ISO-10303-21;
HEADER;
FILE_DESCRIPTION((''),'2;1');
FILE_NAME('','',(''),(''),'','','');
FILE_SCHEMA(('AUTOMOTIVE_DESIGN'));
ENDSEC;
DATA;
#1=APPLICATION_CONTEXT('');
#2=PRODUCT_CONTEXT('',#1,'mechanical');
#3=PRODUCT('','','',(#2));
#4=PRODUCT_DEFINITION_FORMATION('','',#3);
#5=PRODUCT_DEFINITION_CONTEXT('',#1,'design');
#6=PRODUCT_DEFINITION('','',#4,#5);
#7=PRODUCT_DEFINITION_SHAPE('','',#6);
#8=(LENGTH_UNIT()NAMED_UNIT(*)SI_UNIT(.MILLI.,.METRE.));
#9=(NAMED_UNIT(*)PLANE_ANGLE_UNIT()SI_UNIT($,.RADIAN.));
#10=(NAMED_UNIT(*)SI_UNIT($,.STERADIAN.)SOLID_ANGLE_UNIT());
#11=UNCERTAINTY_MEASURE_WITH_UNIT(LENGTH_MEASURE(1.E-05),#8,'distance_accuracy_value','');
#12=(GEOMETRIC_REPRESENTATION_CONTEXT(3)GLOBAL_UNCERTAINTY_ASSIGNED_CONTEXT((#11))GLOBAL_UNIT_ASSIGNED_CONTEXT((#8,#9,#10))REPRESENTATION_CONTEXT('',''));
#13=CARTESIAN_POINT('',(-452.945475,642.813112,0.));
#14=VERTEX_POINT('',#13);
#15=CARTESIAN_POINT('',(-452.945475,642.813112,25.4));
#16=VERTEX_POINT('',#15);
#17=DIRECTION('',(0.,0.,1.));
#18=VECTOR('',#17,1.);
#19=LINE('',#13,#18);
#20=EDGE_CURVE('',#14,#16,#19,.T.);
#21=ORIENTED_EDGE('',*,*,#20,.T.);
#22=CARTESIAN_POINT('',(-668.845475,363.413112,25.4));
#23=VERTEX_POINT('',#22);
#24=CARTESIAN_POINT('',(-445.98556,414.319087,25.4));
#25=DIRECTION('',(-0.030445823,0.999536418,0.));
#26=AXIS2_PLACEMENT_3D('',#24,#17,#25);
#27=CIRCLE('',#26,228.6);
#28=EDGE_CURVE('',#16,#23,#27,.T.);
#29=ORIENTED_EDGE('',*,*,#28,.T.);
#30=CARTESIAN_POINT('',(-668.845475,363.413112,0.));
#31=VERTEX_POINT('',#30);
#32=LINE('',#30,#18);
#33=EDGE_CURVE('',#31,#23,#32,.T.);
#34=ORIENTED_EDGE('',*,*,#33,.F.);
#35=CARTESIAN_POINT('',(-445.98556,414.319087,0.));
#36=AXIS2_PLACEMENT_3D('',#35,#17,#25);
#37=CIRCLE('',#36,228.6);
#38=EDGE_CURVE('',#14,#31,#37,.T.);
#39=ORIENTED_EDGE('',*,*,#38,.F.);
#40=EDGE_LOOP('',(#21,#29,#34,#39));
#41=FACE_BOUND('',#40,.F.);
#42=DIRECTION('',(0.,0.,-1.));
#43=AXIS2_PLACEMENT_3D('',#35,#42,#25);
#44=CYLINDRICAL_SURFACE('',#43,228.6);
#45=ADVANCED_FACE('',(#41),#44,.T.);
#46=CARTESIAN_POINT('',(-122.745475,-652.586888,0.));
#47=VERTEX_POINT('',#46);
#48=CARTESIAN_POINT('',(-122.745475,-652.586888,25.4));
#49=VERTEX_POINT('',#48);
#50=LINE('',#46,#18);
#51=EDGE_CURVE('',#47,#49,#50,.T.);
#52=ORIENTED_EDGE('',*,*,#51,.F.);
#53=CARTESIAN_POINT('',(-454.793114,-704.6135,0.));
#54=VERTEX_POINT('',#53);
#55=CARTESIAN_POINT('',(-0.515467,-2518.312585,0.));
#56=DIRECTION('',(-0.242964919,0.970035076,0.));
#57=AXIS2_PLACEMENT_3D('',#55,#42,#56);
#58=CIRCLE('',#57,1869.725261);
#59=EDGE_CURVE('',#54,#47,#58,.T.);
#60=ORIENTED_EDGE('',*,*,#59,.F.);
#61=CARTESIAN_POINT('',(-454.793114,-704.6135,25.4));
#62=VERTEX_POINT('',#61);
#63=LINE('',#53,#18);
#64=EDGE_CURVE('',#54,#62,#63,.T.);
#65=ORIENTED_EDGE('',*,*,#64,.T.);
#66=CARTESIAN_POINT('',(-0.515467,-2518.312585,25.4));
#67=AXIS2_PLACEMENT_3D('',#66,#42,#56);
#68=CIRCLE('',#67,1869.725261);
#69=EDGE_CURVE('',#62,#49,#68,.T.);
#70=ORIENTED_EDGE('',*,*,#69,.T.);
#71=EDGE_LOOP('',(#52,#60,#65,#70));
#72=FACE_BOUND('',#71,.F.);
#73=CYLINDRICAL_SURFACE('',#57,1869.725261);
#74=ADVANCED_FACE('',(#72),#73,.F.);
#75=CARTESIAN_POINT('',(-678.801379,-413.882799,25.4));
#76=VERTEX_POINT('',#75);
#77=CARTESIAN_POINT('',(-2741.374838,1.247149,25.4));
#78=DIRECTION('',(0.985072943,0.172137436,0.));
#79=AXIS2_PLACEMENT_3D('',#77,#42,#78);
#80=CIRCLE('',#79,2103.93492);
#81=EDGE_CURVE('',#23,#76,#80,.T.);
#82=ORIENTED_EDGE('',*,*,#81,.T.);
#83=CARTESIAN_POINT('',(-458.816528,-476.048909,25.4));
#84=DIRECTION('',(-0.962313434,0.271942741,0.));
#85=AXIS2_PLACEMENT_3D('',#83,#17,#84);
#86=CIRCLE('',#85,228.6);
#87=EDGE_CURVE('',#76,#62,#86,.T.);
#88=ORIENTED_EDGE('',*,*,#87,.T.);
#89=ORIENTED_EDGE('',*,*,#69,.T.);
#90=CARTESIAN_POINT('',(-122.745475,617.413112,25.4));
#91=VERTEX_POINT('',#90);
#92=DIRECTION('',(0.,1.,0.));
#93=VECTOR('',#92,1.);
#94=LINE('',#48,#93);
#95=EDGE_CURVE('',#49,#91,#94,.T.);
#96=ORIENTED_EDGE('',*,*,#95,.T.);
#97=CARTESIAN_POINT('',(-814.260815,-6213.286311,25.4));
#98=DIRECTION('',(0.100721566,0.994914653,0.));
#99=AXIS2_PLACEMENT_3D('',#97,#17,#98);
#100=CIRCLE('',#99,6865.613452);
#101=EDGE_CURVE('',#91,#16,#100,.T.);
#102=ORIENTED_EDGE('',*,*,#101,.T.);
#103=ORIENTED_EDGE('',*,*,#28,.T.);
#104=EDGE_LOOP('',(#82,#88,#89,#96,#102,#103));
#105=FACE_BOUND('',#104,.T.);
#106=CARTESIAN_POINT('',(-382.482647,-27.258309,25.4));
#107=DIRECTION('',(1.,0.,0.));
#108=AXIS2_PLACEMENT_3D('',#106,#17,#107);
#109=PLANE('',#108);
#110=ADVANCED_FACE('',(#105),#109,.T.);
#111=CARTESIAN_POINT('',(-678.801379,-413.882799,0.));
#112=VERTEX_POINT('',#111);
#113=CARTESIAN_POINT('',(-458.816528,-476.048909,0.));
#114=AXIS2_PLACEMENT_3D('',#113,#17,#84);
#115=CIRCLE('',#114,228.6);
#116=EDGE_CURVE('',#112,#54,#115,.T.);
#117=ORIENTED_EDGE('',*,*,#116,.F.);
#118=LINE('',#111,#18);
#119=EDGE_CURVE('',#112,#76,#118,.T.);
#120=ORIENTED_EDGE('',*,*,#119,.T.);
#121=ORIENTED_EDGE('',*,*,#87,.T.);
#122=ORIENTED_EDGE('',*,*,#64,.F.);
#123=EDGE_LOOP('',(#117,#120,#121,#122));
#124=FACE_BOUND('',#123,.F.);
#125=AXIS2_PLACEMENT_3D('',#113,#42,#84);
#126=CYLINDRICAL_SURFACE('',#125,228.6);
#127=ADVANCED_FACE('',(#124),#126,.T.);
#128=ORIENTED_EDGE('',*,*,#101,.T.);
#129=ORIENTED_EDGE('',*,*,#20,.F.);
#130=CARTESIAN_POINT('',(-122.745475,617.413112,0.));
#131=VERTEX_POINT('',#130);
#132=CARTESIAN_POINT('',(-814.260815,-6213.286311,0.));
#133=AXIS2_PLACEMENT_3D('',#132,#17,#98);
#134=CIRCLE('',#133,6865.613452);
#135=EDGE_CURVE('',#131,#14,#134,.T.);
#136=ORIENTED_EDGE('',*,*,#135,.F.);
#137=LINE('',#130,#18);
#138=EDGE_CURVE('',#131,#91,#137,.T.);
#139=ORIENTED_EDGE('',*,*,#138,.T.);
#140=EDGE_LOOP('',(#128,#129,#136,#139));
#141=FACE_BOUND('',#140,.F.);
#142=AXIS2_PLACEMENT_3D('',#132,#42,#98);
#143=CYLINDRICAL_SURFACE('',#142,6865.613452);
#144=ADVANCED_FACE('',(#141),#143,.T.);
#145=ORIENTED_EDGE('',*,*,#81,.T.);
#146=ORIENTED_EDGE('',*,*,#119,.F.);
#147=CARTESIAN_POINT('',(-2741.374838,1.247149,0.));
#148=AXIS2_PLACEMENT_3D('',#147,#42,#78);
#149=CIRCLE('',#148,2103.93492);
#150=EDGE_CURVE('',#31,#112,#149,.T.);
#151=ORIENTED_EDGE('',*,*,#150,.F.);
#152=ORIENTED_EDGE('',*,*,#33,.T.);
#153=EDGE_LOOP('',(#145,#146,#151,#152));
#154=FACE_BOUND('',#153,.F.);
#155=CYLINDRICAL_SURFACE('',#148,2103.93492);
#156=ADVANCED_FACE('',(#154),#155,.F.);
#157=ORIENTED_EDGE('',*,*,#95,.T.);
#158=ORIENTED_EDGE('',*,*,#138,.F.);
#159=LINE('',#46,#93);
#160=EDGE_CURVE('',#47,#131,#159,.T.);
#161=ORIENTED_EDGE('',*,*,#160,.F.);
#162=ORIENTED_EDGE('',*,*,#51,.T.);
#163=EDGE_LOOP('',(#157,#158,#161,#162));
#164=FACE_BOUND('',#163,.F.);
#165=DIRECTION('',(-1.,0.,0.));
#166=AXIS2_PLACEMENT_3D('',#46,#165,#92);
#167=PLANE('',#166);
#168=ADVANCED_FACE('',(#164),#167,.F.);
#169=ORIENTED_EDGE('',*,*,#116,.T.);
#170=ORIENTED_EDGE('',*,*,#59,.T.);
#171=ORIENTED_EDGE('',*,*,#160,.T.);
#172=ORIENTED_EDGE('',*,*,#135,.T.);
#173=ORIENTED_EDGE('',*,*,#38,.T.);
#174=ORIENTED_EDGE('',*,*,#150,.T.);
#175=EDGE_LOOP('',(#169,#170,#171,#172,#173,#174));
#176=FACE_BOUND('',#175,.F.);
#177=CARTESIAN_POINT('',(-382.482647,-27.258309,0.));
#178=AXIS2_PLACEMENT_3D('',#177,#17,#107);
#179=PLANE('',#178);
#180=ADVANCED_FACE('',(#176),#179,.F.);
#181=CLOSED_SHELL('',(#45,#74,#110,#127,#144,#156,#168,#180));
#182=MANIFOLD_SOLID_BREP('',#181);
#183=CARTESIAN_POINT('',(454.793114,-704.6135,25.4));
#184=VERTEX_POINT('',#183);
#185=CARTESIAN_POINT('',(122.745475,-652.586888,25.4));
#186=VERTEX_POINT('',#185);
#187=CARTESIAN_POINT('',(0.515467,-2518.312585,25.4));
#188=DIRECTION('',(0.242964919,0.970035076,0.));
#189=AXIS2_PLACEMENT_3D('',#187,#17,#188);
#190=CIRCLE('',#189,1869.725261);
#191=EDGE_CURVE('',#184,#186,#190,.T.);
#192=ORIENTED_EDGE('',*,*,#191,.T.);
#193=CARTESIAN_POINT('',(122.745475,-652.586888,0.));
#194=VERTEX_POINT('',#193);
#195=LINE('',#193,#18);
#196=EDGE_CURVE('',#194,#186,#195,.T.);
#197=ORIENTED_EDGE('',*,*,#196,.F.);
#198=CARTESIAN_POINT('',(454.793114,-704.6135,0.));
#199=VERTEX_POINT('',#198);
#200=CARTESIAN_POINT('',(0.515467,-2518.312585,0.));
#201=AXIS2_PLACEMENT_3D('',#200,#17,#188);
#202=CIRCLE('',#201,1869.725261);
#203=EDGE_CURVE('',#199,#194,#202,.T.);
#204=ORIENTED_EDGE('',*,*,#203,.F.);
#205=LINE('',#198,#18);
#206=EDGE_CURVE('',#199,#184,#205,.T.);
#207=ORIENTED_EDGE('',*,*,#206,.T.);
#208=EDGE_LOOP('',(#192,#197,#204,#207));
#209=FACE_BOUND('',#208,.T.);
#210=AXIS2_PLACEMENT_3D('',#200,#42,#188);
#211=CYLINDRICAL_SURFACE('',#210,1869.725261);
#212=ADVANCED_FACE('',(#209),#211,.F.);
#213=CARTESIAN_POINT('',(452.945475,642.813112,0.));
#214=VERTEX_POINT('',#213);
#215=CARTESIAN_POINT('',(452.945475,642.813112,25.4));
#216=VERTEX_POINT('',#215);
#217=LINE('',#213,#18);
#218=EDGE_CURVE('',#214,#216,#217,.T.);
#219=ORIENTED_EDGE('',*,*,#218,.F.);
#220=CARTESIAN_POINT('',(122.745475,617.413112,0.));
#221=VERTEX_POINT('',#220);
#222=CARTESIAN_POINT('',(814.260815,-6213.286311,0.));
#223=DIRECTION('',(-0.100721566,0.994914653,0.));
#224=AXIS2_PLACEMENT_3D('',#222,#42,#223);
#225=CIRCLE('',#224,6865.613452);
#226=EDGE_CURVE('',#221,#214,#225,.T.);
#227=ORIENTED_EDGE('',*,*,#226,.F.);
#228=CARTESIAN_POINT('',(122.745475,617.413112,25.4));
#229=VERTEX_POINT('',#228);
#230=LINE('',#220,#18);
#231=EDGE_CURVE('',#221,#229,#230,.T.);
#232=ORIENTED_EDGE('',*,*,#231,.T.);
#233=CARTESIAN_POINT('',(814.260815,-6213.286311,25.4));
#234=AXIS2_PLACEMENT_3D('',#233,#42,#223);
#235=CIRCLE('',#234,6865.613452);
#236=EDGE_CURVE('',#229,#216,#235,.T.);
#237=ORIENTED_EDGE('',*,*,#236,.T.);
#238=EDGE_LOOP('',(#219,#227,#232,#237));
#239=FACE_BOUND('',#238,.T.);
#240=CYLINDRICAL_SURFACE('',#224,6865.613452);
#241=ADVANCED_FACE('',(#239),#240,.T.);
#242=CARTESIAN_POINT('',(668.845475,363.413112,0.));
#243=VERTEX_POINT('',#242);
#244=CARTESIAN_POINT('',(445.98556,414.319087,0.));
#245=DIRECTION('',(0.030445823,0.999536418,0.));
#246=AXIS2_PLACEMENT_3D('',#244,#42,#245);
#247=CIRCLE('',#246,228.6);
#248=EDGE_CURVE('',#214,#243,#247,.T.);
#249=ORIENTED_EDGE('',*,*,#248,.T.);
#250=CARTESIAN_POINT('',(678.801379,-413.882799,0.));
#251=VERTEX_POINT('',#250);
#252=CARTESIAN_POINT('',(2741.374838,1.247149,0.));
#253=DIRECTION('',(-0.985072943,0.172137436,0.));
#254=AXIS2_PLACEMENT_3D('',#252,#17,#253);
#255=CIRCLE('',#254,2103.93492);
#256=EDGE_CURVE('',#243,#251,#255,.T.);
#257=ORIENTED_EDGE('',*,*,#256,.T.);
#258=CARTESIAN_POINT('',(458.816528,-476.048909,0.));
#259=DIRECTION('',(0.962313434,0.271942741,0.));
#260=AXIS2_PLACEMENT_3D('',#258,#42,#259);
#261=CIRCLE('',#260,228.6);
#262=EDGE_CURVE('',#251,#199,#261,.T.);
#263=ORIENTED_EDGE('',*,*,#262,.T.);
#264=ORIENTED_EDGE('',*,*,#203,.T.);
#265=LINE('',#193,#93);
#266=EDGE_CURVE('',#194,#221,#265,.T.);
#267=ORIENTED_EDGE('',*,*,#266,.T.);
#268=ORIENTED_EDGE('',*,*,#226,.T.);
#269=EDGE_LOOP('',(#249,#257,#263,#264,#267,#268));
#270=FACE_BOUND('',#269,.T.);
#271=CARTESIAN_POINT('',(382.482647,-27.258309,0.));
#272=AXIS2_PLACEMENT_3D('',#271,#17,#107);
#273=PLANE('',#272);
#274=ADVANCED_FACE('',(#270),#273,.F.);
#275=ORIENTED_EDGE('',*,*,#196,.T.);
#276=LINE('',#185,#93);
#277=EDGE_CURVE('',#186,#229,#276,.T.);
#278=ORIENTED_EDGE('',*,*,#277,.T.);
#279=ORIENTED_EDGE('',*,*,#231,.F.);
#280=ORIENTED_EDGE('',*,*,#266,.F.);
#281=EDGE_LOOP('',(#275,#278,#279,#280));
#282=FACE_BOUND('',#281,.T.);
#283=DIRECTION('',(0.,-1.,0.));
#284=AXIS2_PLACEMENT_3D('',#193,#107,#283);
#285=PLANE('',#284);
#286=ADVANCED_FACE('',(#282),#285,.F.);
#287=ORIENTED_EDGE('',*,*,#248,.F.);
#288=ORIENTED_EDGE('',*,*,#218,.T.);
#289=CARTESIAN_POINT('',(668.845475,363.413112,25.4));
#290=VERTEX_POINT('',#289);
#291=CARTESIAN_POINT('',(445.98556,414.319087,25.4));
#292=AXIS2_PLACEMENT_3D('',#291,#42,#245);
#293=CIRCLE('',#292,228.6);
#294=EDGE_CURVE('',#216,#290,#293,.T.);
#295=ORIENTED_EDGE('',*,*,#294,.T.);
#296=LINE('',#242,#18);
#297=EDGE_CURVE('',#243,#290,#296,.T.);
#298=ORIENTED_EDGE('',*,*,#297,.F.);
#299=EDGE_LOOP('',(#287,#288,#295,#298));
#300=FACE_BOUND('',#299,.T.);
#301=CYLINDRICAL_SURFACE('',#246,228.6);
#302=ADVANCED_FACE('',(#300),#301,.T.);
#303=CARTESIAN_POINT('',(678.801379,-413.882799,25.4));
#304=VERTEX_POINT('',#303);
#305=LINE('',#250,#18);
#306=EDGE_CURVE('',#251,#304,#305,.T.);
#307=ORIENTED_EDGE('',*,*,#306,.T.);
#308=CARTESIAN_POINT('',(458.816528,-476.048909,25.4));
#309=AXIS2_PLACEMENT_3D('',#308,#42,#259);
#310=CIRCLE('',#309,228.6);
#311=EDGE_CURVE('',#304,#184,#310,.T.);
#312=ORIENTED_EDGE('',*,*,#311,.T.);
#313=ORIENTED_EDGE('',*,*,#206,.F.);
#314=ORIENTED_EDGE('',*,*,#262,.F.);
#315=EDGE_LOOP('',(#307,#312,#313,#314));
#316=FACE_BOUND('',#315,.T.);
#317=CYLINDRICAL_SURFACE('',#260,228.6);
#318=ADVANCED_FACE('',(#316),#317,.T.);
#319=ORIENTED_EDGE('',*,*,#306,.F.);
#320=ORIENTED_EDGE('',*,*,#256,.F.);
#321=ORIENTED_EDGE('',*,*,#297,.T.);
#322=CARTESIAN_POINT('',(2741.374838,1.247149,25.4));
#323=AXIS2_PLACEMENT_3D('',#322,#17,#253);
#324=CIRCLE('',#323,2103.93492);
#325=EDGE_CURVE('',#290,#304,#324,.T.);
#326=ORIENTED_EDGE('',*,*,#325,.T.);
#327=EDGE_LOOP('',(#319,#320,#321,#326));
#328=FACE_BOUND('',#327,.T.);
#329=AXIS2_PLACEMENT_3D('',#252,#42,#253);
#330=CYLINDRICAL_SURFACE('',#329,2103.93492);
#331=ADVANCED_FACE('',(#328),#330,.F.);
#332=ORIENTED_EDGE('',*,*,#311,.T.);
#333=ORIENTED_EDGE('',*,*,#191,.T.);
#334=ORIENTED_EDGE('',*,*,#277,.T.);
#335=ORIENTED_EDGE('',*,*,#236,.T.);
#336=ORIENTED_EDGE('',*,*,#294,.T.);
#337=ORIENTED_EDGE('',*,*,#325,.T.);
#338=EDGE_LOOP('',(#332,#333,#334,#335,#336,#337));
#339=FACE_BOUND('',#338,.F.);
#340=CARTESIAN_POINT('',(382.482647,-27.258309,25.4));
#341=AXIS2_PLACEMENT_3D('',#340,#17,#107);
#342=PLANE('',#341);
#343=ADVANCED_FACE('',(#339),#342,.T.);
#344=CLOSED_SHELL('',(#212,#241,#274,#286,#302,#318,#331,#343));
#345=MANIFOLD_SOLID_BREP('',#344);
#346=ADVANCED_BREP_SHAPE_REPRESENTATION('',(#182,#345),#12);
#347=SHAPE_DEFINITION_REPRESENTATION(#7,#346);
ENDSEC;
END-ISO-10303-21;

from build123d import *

# Parameters (mm, degrees)
F1_DEPTH = 25.4


# Not quite as in the source:
# - a feature names something its author has since deleted; it is built from what else it names


with BuildPart() as f1:
    # F0 (on Top) → F1 (new body)
    with BuildSketch(Plane.XY):
        with BuildLine():
            Line((-122.74547472, 363.4131123645), (-122.74547472, 617.4131123645))
            ThreePointArc((-122.74547472, 617.4131123645), (-287.6923004816, 632.1043774637), (-452.94547472, 642.8131123645))
            ThreePointArc((-452.94547472, 642.8131123645), (-626.8733109875, 554.0959858439), (-668.84547472, 363.4131123645))
            ThreePointArc((-668.84547472, 363.4131123645), (-637.6124772586, -25.6986468555), (-678.8013792429, -413.8827985761))
            ThreePointArc((-678.8013792429, -413.8827985761), (-639.8991633536, -615.573241104), (-454.793114458, -704.61349981))
            ThreePointArc((-454.793114458, -704.61349981), (-289.9406925994, -671.1240208892), (-122.74547472, -652.5868876355))
            Line((-122.74547472, -652.5868876355), (-122.74547472, 363.4131123645))
        make_face()
    extrude(amount=F1_DEPTH)


with BuildPart() as f2_1:
    # F2: instance of F1
    add(f1.part.mirror(Plane.YZ))


solid = Compound([f1.part, f2_1.part])
